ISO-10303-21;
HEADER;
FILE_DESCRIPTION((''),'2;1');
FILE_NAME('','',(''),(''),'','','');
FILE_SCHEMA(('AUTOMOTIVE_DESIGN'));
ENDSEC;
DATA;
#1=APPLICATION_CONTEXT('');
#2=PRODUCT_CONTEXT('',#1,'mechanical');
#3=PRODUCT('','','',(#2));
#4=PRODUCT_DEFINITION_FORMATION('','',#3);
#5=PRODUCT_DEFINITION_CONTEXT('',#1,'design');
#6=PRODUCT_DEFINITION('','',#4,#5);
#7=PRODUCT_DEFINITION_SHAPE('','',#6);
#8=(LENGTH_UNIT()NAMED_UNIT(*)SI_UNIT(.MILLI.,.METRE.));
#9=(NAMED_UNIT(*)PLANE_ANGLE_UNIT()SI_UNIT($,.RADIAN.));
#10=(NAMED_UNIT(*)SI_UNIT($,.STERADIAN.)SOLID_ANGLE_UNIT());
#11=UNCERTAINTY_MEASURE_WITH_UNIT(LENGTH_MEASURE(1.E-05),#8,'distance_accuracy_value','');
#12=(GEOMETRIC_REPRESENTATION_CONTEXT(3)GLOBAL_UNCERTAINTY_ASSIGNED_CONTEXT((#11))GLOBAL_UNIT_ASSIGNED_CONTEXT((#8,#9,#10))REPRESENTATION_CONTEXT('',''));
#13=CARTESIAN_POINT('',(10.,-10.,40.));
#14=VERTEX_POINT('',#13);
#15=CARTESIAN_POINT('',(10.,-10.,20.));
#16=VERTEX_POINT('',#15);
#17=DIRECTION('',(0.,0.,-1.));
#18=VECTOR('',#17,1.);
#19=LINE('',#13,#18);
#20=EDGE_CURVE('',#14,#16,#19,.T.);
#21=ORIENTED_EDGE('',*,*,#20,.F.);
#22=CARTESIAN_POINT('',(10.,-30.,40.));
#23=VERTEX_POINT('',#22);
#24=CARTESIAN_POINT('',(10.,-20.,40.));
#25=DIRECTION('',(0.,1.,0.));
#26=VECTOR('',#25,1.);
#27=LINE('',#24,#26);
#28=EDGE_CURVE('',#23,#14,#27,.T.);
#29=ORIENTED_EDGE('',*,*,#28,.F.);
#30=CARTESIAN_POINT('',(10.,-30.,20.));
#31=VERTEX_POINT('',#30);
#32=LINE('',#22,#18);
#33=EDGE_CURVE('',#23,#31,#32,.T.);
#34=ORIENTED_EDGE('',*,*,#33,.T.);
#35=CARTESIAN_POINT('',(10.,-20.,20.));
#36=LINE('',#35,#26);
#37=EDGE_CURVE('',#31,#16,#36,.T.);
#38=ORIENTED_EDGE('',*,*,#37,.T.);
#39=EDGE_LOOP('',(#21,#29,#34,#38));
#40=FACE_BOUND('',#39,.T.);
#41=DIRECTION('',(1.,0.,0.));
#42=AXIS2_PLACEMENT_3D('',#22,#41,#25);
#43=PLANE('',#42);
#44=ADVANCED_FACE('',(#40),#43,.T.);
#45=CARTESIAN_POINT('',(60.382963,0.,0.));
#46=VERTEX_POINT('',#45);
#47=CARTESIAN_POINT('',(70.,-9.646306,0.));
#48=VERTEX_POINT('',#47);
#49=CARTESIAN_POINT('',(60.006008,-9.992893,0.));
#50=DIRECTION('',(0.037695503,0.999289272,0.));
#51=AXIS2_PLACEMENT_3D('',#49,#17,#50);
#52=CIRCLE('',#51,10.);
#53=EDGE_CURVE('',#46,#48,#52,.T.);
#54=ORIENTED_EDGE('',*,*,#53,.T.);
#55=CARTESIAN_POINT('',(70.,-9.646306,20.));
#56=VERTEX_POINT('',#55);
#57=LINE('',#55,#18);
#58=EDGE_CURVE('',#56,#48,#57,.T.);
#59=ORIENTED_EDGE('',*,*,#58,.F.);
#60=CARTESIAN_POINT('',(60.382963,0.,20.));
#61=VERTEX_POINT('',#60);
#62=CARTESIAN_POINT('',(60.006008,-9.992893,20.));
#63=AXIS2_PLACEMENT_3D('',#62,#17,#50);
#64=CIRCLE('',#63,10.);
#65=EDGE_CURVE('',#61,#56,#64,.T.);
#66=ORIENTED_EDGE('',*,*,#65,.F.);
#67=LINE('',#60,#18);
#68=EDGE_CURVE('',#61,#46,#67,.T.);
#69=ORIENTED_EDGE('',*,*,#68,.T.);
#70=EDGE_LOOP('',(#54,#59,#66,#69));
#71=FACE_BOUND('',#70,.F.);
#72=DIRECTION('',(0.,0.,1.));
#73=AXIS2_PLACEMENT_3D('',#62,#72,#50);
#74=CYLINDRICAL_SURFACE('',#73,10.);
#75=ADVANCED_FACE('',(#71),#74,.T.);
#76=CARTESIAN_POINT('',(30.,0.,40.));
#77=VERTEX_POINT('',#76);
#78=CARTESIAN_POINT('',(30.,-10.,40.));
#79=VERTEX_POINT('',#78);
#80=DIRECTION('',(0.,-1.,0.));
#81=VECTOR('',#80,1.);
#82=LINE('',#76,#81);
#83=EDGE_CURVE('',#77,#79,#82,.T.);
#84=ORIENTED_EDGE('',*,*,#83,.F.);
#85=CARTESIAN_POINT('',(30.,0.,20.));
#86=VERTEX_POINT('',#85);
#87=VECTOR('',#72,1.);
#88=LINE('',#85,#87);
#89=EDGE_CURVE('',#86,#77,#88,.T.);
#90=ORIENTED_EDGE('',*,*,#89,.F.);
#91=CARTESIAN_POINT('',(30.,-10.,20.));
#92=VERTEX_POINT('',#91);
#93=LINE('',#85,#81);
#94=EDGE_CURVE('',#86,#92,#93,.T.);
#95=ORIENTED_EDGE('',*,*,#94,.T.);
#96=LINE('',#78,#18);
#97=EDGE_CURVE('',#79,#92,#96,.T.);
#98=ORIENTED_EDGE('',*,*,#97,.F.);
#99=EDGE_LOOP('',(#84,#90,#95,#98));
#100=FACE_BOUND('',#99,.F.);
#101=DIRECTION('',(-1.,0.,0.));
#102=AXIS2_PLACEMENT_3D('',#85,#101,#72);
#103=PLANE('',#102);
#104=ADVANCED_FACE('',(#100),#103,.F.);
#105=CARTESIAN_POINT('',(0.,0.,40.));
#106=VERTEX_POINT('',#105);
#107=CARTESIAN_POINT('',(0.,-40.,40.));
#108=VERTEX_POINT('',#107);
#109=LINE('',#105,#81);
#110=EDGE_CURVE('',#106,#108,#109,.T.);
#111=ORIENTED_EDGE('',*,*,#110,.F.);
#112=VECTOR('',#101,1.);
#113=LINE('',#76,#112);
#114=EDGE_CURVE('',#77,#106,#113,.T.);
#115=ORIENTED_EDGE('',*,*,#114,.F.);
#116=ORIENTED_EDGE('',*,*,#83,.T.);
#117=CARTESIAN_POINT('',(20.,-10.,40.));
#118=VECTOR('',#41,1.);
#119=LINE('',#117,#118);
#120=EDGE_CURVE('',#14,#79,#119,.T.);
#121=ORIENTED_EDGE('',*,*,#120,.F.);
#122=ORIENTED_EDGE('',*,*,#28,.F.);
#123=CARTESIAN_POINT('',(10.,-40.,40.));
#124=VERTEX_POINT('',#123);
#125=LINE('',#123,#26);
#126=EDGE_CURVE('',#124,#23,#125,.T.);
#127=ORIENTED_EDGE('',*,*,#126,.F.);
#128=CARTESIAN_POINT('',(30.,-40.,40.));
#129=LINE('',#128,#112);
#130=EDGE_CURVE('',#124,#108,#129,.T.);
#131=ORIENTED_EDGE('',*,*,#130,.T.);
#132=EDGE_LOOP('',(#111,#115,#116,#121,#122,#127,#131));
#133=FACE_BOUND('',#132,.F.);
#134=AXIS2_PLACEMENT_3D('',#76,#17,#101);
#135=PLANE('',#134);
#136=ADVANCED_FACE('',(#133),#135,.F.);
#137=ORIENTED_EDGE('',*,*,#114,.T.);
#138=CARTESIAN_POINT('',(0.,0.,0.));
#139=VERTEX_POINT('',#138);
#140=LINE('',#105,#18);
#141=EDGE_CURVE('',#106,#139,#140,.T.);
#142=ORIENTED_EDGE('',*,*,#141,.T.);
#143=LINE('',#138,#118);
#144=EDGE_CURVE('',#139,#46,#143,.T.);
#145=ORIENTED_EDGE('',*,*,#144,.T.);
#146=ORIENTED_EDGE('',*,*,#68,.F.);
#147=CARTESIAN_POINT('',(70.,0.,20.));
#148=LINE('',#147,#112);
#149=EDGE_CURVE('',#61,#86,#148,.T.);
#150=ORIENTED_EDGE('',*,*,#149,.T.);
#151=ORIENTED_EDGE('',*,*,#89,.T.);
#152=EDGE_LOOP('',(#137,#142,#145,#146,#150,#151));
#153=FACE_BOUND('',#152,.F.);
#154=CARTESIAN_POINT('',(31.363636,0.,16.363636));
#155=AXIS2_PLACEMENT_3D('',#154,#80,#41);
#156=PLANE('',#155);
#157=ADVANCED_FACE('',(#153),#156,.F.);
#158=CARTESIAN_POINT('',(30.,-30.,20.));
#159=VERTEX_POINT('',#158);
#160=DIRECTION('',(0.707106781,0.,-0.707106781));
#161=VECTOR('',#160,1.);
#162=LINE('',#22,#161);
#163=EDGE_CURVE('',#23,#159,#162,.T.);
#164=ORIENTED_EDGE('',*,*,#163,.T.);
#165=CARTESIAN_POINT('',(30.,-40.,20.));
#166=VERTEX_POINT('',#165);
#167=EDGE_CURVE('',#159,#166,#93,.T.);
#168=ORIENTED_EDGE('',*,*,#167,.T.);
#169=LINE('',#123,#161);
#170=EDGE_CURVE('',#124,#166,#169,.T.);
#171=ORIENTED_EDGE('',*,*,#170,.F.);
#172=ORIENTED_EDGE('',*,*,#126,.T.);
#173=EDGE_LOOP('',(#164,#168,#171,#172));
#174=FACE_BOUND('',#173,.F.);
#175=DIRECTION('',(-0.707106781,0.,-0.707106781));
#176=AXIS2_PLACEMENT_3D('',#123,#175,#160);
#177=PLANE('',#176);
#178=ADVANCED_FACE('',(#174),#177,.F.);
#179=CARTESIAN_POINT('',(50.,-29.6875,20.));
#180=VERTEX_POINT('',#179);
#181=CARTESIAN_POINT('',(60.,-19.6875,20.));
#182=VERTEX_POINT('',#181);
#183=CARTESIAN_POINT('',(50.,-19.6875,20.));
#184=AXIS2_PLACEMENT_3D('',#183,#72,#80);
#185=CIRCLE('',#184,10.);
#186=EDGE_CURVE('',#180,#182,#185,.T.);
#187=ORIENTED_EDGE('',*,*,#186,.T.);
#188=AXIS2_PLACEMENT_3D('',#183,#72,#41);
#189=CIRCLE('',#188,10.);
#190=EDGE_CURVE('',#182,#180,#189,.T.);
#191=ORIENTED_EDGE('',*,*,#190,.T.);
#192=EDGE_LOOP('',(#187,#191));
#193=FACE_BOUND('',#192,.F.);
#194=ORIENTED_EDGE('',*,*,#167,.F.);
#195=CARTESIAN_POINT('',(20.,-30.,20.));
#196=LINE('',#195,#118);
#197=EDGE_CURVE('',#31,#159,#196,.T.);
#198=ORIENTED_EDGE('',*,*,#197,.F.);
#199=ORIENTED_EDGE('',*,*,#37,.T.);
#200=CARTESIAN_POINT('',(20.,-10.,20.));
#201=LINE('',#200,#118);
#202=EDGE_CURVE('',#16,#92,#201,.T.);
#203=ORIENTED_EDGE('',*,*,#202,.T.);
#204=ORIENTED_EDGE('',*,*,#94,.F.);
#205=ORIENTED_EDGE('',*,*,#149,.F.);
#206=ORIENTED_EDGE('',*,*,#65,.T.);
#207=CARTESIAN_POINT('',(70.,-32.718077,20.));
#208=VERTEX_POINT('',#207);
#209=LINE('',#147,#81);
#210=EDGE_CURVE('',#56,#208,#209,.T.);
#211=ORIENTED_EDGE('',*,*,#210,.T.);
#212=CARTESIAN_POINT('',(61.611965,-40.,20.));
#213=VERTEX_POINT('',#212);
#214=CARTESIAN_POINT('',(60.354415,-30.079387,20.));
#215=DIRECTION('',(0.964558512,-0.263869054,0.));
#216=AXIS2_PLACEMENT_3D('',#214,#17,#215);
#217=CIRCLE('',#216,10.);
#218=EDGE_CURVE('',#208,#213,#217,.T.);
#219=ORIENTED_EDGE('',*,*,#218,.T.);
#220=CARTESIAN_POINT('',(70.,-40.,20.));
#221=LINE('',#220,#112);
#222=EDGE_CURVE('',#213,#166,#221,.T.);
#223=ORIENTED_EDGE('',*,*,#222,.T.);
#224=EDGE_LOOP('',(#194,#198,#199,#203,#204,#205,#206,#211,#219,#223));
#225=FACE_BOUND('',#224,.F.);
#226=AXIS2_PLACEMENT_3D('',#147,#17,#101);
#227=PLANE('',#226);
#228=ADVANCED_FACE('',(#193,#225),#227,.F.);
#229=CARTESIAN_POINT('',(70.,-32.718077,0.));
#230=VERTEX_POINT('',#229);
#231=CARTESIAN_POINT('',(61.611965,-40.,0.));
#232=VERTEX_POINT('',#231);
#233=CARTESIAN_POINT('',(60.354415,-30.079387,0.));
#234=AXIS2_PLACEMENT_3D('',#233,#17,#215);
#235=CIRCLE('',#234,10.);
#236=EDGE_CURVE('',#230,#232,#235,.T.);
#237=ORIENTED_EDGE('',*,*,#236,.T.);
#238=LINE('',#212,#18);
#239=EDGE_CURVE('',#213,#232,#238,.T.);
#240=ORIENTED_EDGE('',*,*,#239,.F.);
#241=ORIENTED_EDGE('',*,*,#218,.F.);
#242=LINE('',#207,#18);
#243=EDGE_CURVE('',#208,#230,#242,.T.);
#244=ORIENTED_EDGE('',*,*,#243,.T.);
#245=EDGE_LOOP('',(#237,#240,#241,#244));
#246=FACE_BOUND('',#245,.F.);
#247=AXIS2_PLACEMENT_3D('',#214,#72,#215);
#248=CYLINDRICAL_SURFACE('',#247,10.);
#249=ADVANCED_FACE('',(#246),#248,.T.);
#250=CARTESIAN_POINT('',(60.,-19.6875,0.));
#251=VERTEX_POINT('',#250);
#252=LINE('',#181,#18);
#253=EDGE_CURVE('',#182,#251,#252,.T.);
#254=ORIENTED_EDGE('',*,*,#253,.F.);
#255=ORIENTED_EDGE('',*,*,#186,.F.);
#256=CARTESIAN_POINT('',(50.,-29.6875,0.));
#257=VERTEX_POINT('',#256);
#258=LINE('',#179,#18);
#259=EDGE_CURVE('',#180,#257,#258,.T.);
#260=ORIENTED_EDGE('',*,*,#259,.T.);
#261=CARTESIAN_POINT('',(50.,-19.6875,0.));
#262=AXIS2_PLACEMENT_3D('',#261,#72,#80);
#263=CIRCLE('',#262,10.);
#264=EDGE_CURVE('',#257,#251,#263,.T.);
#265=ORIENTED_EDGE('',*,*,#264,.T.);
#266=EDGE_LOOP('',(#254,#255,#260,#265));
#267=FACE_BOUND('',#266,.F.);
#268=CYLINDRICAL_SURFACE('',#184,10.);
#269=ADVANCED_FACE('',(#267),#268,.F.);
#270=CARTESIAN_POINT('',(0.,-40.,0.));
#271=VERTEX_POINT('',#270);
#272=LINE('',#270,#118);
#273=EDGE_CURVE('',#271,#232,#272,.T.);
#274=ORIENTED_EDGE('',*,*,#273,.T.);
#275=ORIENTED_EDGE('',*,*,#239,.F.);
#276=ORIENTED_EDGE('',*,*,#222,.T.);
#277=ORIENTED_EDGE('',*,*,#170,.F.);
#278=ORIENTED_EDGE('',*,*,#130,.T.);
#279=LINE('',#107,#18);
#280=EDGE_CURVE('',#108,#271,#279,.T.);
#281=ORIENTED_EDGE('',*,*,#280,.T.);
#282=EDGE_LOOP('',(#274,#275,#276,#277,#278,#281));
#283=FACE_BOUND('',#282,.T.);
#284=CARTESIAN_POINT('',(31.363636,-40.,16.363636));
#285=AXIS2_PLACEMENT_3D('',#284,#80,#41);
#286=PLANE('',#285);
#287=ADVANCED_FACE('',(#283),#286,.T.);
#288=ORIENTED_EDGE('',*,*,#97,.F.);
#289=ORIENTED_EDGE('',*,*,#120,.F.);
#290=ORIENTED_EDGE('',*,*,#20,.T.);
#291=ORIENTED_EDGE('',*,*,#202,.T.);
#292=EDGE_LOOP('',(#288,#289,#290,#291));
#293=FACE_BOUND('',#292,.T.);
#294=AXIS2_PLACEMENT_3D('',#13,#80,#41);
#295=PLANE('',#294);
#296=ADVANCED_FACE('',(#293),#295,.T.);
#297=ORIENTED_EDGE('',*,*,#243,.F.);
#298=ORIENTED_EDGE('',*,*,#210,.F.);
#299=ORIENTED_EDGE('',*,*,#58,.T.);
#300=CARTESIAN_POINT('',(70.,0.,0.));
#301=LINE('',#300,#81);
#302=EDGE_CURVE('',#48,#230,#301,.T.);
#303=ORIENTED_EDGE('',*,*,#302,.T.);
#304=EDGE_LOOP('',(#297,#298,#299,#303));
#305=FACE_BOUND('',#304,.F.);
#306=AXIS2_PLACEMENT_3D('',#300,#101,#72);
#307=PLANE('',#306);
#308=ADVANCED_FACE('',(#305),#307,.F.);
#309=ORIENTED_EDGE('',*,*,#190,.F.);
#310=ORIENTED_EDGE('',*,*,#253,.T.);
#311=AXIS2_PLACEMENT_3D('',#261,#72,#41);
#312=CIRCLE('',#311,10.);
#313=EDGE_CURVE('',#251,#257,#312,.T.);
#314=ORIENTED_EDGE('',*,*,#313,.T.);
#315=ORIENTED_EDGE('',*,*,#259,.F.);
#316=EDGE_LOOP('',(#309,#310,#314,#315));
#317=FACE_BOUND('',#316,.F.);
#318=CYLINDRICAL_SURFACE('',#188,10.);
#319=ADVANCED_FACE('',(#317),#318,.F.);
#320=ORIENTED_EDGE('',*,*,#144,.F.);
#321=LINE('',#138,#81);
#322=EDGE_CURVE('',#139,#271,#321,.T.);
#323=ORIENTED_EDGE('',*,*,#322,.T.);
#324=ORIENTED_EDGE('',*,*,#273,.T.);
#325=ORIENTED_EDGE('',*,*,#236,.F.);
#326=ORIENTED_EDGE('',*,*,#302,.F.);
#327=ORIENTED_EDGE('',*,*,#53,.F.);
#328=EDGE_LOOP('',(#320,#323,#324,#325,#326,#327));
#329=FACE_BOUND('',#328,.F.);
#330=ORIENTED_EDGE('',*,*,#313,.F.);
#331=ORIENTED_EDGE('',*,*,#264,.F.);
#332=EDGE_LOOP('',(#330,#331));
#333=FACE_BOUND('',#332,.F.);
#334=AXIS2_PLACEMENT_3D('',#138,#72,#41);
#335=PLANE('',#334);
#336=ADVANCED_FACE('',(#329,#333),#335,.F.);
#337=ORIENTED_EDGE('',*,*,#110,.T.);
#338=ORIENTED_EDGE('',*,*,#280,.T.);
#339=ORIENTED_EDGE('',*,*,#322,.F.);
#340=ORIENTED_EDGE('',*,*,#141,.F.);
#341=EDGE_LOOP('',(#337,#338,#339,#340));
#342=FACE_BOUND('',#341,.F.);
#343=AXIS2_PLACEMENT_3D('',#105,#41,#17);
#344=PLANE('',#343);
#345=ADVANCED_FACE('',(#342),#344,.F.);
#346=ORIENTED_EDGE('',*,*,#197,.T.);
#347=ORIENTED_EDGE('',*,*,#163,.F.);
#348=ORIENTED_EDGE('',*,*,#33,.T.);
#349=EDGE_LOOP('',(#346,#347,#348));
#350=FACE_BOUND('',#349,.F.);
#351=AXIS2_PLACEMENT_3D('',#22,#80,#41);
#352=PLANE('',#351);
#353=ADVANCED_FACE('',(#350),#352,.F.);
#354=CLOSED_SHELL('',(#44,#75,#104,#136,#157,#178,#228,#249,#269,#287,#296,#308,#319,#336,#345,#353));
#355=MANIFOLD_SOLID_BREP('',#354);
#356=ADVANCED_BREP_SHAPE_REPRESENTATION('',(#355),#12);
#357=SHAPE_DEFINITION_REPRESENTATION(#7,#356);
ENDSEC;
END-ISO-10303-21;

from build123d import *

# Parameters (mm, degrees)
F1_DEPTH  = 40
F3_DEPTH  = 10
F4_W      = 20
F4_H      = 20
F5_DEPTH  = 20
F7_DEPTH  = 20
F9_DEPTH  = 20
F11_DEPTH = 20


with BuildPart() as f1:
    # F0 (on Front) → F1 (new body)
    with BuildSketch(Plane.XZ):
        Polygon((0, 40), (0, 0), (70, 0), (70, 20), (30, 20), (30, 40), align=None)
    extrude(amount=F1_DEPTH)

    # F2 (on face) → F3 (cut)
    with BuildSketch(Plane.XZ.offset(40)):
        Polygon((30, 20), (30, 40), (10, 40), align=None)
    extrude(amount=-F3_DEPTH, mode=Mode.SUBTRACT)

    # F4 (on face) → F5 (cut)
    with BuildSketch(Plane.XY.offset(40)):
        with Locations((20, -20)):
            Rectangle(F4_W, F4_H)
    extrude(amount=-F5_DEPTH, mode=Mode.SUBTRACT)

    # F6 (on face) → F7 (cut)
    with BuildSketch(Plane.XY.offset(20)):
        with BuildLine():
            ThreePointArc((60.3829629344, 0), (67.0878115757, -2.9325770906), (70, -9.6463064772))
            Line((70, -9.6463064772), (70, 0))
            Line((70, 0), (60.3829629344, 0))
        make_face()
    extrude(amount=-F7_DEPTH, mode=Mode.SUBTRACT)

    # F8 (on face) → F9 (cut)
    with BuildSketch(Plane.XY.offset(20)):
        with BuildLine():
            ThreePointArc((70, -32.718077302), (66.9100377104, -37.6307978482), (61.6119652987, -40))
            Line((61.6119652987, -40), (70, -40))
            Line((70, -40), (70, -32.718077302))
        make_face()
    extrude(amount=-F9_DEPTH, mode=Mode.SUBTRACT)

    # F10 (on face) → F11 (cut)
    with BuildSketch(Plane.XY.offset(20)):
        with BuildLine():
            ThreePointArc((50, -29.687499851), (57.0710678119, -26.7585676629), (60, -19.687499851))
            ThreePointArc((60, -19.687499851), (42.9289321881, -12.6164320391), (50, -29.687499851))
        make_face()
    extrude(amount=-F11_DEPTH, mode=Mode.SUBTRACT)


solid = f1.part
